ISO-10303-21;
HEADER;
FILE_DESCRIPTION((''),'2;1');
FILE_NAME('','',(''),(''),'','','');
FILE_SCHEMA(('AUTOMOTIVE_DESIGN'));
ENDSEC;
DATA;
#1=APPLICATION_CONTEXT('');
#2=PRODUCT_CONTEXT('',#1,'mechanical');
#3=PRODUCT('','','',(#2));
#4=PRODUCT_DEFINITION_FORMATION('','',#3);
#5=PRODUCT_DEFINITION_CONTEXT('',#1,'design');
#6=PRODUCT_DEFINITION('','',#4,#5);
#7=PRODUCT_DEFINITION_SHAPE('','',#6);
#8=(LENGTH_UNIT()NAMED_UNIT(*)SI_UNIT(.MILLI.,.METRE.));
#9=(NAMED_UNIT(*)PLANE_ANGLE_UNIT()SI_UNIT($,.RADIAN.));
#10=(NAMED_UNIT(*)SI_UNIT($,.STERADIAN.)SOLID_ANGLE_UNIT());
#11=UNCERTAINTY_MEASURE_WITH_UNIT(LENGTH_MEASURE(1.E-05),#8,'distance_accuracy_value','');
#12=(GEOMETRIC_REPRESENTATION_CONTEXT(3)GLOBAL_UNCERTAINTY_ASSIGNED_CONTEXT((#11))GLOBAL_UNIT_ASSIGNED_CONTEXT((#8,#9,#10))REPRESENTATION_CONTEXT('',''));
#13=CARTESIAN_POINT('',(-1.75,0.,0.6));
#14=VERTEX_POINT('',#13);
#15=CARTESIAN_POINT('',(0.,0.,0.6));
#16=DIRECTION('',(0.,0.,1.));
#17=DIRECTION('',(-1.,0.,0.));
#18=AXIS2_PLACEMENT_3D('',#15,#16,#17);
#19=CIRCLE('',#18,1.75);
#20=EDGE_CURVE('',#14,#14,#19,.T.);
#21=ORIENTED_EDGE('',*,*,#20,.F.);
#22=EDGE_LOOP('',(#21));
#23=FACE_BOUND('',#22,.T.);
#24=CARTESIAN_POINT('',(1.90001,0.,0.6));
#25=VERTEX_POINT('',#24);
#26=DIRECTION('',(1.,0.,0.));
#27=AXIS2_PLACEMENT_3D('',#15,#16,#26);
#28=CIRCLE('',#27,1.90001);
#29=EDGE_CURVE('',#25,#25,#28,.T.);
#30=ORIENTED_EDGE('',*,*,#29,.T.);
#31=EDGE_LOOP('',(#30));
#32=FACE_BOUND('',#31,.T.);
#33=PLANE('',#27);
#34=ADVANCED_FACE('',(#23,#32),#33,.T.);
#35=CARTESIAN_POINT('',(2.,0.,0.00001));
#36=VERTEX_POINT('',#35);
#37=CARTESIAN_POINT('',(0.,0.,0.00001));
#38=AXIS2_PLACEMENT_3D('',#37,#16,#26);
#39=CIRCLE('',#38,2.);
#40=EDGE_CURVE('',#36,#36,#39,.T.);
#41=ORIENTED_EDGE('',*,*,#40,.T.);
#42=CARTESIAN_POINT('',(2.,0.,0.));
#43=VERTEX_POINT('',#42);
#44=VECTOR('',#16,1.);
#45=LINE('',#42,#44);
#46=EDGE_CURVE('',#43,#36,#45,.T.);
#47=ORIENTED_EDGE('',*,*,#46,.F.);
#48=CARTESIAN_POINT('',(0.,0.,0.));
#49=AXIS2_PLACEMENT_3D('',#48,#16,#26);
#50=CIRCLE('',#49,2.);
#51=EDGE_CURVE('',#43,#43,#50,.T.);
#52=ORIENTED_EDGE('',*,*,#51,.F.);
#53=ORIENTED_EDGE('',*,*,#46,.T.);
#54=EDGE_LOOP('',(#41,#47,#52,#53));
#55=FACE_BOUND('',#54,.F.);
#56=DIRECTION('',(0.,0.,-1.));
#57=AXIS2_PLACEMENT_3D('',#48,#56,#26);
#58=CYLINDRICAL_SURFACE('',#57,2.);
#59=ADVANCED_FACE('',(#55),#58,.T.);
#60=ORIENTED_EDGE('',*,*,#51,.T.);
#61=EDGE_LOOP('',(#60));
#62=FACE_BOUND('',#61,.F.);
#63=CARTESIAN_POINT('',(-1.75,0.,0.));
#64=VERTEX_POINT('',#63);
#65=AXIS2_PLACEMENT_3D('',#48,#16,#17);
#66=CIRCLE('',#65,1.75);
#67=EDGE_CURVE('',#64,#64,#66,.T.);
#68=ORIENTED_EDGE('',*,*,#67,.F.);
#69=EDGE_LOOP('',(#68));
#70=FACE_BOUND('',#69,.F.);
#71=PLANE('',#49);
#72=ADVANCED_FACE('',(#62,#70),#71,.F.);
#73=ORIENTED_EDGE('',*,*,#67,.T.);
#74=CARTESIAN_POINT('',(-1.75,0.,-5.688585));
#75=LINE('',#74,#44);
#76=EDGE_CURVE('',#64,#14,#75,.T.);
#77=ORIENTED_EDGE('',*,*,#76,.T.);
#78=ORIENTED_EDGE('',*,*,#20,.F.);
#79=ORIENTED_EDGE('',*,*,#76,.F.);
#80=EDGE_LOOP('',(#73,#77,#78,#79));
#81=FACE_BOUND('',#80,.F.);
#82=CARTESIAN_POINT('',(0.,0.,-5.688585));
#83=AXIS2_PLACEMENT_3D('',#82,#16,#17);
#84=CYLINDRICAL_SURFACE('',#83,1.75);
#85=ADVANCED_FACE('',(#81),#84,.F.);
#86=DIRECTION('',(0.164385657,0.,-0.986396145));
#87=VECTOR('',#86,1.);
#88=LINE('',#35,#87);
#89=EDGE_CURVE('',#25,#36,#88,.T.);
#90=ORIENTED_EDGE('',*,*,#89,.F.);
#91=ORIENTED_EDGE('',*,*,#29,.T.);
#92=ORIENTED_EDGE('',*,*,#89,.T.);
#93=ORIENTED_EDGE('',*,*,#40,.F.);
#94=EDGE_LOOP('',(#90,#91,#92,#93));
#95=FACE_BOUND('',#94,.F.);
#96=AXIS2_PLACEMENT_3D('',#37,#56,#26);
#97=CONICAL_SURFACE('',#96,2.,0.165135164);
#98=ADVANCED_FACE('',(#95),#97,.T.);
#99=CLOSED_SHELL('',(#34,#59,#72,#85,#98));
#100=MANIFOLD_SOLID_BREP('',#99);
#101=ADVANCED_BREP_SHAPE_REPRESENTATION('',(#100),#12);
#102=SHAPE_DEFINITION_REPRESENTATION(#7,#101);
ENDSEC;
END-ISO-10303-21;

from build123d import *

# Parameters (mm, degrees)
F0_R     = 2
F1_DEPTH = 0.6
F2_D     = 3.5
F3_SIZE2 = 0.59999
F3_SIZE  = 0.09999


# Not quite as in the source:
# - a fillet or chamfer is up to 0.001 mm smaller than in the source, because OpenCascade refuses the exact size


with BuildPart() as f1:
    # F0 (on Top) → F1 (new body)
    with BuildSketch(Plane.XY):
        Circle(F0_R)
    extrude(amount=F1_DEPTH)

    # F2 (through all)
    with Locations(Plane(origin=(0, 0, 0), x_dir=(1, 0, 0), z_dir=(0, 0, -1))):
        with Locations((0, 0)):
            Hole(F2_D / 2)

    # F3 (size 0.1 and 0.6 in the source; OpenCascade refuses exactly that, so slightly less here)
    f3_edges = [f1.edges().sort_by_distance(p)[0] for p in [
        (-2, 0, 0.6),
    ]]
    f3_side = f1.faces().sort_by_distance((-1.943431, 0, 0.6))[0]
    chamfer(f3_edges, length=F3_SIZE, length2=F3_SIZE2, reference=f3_side)


solid = f1.part
